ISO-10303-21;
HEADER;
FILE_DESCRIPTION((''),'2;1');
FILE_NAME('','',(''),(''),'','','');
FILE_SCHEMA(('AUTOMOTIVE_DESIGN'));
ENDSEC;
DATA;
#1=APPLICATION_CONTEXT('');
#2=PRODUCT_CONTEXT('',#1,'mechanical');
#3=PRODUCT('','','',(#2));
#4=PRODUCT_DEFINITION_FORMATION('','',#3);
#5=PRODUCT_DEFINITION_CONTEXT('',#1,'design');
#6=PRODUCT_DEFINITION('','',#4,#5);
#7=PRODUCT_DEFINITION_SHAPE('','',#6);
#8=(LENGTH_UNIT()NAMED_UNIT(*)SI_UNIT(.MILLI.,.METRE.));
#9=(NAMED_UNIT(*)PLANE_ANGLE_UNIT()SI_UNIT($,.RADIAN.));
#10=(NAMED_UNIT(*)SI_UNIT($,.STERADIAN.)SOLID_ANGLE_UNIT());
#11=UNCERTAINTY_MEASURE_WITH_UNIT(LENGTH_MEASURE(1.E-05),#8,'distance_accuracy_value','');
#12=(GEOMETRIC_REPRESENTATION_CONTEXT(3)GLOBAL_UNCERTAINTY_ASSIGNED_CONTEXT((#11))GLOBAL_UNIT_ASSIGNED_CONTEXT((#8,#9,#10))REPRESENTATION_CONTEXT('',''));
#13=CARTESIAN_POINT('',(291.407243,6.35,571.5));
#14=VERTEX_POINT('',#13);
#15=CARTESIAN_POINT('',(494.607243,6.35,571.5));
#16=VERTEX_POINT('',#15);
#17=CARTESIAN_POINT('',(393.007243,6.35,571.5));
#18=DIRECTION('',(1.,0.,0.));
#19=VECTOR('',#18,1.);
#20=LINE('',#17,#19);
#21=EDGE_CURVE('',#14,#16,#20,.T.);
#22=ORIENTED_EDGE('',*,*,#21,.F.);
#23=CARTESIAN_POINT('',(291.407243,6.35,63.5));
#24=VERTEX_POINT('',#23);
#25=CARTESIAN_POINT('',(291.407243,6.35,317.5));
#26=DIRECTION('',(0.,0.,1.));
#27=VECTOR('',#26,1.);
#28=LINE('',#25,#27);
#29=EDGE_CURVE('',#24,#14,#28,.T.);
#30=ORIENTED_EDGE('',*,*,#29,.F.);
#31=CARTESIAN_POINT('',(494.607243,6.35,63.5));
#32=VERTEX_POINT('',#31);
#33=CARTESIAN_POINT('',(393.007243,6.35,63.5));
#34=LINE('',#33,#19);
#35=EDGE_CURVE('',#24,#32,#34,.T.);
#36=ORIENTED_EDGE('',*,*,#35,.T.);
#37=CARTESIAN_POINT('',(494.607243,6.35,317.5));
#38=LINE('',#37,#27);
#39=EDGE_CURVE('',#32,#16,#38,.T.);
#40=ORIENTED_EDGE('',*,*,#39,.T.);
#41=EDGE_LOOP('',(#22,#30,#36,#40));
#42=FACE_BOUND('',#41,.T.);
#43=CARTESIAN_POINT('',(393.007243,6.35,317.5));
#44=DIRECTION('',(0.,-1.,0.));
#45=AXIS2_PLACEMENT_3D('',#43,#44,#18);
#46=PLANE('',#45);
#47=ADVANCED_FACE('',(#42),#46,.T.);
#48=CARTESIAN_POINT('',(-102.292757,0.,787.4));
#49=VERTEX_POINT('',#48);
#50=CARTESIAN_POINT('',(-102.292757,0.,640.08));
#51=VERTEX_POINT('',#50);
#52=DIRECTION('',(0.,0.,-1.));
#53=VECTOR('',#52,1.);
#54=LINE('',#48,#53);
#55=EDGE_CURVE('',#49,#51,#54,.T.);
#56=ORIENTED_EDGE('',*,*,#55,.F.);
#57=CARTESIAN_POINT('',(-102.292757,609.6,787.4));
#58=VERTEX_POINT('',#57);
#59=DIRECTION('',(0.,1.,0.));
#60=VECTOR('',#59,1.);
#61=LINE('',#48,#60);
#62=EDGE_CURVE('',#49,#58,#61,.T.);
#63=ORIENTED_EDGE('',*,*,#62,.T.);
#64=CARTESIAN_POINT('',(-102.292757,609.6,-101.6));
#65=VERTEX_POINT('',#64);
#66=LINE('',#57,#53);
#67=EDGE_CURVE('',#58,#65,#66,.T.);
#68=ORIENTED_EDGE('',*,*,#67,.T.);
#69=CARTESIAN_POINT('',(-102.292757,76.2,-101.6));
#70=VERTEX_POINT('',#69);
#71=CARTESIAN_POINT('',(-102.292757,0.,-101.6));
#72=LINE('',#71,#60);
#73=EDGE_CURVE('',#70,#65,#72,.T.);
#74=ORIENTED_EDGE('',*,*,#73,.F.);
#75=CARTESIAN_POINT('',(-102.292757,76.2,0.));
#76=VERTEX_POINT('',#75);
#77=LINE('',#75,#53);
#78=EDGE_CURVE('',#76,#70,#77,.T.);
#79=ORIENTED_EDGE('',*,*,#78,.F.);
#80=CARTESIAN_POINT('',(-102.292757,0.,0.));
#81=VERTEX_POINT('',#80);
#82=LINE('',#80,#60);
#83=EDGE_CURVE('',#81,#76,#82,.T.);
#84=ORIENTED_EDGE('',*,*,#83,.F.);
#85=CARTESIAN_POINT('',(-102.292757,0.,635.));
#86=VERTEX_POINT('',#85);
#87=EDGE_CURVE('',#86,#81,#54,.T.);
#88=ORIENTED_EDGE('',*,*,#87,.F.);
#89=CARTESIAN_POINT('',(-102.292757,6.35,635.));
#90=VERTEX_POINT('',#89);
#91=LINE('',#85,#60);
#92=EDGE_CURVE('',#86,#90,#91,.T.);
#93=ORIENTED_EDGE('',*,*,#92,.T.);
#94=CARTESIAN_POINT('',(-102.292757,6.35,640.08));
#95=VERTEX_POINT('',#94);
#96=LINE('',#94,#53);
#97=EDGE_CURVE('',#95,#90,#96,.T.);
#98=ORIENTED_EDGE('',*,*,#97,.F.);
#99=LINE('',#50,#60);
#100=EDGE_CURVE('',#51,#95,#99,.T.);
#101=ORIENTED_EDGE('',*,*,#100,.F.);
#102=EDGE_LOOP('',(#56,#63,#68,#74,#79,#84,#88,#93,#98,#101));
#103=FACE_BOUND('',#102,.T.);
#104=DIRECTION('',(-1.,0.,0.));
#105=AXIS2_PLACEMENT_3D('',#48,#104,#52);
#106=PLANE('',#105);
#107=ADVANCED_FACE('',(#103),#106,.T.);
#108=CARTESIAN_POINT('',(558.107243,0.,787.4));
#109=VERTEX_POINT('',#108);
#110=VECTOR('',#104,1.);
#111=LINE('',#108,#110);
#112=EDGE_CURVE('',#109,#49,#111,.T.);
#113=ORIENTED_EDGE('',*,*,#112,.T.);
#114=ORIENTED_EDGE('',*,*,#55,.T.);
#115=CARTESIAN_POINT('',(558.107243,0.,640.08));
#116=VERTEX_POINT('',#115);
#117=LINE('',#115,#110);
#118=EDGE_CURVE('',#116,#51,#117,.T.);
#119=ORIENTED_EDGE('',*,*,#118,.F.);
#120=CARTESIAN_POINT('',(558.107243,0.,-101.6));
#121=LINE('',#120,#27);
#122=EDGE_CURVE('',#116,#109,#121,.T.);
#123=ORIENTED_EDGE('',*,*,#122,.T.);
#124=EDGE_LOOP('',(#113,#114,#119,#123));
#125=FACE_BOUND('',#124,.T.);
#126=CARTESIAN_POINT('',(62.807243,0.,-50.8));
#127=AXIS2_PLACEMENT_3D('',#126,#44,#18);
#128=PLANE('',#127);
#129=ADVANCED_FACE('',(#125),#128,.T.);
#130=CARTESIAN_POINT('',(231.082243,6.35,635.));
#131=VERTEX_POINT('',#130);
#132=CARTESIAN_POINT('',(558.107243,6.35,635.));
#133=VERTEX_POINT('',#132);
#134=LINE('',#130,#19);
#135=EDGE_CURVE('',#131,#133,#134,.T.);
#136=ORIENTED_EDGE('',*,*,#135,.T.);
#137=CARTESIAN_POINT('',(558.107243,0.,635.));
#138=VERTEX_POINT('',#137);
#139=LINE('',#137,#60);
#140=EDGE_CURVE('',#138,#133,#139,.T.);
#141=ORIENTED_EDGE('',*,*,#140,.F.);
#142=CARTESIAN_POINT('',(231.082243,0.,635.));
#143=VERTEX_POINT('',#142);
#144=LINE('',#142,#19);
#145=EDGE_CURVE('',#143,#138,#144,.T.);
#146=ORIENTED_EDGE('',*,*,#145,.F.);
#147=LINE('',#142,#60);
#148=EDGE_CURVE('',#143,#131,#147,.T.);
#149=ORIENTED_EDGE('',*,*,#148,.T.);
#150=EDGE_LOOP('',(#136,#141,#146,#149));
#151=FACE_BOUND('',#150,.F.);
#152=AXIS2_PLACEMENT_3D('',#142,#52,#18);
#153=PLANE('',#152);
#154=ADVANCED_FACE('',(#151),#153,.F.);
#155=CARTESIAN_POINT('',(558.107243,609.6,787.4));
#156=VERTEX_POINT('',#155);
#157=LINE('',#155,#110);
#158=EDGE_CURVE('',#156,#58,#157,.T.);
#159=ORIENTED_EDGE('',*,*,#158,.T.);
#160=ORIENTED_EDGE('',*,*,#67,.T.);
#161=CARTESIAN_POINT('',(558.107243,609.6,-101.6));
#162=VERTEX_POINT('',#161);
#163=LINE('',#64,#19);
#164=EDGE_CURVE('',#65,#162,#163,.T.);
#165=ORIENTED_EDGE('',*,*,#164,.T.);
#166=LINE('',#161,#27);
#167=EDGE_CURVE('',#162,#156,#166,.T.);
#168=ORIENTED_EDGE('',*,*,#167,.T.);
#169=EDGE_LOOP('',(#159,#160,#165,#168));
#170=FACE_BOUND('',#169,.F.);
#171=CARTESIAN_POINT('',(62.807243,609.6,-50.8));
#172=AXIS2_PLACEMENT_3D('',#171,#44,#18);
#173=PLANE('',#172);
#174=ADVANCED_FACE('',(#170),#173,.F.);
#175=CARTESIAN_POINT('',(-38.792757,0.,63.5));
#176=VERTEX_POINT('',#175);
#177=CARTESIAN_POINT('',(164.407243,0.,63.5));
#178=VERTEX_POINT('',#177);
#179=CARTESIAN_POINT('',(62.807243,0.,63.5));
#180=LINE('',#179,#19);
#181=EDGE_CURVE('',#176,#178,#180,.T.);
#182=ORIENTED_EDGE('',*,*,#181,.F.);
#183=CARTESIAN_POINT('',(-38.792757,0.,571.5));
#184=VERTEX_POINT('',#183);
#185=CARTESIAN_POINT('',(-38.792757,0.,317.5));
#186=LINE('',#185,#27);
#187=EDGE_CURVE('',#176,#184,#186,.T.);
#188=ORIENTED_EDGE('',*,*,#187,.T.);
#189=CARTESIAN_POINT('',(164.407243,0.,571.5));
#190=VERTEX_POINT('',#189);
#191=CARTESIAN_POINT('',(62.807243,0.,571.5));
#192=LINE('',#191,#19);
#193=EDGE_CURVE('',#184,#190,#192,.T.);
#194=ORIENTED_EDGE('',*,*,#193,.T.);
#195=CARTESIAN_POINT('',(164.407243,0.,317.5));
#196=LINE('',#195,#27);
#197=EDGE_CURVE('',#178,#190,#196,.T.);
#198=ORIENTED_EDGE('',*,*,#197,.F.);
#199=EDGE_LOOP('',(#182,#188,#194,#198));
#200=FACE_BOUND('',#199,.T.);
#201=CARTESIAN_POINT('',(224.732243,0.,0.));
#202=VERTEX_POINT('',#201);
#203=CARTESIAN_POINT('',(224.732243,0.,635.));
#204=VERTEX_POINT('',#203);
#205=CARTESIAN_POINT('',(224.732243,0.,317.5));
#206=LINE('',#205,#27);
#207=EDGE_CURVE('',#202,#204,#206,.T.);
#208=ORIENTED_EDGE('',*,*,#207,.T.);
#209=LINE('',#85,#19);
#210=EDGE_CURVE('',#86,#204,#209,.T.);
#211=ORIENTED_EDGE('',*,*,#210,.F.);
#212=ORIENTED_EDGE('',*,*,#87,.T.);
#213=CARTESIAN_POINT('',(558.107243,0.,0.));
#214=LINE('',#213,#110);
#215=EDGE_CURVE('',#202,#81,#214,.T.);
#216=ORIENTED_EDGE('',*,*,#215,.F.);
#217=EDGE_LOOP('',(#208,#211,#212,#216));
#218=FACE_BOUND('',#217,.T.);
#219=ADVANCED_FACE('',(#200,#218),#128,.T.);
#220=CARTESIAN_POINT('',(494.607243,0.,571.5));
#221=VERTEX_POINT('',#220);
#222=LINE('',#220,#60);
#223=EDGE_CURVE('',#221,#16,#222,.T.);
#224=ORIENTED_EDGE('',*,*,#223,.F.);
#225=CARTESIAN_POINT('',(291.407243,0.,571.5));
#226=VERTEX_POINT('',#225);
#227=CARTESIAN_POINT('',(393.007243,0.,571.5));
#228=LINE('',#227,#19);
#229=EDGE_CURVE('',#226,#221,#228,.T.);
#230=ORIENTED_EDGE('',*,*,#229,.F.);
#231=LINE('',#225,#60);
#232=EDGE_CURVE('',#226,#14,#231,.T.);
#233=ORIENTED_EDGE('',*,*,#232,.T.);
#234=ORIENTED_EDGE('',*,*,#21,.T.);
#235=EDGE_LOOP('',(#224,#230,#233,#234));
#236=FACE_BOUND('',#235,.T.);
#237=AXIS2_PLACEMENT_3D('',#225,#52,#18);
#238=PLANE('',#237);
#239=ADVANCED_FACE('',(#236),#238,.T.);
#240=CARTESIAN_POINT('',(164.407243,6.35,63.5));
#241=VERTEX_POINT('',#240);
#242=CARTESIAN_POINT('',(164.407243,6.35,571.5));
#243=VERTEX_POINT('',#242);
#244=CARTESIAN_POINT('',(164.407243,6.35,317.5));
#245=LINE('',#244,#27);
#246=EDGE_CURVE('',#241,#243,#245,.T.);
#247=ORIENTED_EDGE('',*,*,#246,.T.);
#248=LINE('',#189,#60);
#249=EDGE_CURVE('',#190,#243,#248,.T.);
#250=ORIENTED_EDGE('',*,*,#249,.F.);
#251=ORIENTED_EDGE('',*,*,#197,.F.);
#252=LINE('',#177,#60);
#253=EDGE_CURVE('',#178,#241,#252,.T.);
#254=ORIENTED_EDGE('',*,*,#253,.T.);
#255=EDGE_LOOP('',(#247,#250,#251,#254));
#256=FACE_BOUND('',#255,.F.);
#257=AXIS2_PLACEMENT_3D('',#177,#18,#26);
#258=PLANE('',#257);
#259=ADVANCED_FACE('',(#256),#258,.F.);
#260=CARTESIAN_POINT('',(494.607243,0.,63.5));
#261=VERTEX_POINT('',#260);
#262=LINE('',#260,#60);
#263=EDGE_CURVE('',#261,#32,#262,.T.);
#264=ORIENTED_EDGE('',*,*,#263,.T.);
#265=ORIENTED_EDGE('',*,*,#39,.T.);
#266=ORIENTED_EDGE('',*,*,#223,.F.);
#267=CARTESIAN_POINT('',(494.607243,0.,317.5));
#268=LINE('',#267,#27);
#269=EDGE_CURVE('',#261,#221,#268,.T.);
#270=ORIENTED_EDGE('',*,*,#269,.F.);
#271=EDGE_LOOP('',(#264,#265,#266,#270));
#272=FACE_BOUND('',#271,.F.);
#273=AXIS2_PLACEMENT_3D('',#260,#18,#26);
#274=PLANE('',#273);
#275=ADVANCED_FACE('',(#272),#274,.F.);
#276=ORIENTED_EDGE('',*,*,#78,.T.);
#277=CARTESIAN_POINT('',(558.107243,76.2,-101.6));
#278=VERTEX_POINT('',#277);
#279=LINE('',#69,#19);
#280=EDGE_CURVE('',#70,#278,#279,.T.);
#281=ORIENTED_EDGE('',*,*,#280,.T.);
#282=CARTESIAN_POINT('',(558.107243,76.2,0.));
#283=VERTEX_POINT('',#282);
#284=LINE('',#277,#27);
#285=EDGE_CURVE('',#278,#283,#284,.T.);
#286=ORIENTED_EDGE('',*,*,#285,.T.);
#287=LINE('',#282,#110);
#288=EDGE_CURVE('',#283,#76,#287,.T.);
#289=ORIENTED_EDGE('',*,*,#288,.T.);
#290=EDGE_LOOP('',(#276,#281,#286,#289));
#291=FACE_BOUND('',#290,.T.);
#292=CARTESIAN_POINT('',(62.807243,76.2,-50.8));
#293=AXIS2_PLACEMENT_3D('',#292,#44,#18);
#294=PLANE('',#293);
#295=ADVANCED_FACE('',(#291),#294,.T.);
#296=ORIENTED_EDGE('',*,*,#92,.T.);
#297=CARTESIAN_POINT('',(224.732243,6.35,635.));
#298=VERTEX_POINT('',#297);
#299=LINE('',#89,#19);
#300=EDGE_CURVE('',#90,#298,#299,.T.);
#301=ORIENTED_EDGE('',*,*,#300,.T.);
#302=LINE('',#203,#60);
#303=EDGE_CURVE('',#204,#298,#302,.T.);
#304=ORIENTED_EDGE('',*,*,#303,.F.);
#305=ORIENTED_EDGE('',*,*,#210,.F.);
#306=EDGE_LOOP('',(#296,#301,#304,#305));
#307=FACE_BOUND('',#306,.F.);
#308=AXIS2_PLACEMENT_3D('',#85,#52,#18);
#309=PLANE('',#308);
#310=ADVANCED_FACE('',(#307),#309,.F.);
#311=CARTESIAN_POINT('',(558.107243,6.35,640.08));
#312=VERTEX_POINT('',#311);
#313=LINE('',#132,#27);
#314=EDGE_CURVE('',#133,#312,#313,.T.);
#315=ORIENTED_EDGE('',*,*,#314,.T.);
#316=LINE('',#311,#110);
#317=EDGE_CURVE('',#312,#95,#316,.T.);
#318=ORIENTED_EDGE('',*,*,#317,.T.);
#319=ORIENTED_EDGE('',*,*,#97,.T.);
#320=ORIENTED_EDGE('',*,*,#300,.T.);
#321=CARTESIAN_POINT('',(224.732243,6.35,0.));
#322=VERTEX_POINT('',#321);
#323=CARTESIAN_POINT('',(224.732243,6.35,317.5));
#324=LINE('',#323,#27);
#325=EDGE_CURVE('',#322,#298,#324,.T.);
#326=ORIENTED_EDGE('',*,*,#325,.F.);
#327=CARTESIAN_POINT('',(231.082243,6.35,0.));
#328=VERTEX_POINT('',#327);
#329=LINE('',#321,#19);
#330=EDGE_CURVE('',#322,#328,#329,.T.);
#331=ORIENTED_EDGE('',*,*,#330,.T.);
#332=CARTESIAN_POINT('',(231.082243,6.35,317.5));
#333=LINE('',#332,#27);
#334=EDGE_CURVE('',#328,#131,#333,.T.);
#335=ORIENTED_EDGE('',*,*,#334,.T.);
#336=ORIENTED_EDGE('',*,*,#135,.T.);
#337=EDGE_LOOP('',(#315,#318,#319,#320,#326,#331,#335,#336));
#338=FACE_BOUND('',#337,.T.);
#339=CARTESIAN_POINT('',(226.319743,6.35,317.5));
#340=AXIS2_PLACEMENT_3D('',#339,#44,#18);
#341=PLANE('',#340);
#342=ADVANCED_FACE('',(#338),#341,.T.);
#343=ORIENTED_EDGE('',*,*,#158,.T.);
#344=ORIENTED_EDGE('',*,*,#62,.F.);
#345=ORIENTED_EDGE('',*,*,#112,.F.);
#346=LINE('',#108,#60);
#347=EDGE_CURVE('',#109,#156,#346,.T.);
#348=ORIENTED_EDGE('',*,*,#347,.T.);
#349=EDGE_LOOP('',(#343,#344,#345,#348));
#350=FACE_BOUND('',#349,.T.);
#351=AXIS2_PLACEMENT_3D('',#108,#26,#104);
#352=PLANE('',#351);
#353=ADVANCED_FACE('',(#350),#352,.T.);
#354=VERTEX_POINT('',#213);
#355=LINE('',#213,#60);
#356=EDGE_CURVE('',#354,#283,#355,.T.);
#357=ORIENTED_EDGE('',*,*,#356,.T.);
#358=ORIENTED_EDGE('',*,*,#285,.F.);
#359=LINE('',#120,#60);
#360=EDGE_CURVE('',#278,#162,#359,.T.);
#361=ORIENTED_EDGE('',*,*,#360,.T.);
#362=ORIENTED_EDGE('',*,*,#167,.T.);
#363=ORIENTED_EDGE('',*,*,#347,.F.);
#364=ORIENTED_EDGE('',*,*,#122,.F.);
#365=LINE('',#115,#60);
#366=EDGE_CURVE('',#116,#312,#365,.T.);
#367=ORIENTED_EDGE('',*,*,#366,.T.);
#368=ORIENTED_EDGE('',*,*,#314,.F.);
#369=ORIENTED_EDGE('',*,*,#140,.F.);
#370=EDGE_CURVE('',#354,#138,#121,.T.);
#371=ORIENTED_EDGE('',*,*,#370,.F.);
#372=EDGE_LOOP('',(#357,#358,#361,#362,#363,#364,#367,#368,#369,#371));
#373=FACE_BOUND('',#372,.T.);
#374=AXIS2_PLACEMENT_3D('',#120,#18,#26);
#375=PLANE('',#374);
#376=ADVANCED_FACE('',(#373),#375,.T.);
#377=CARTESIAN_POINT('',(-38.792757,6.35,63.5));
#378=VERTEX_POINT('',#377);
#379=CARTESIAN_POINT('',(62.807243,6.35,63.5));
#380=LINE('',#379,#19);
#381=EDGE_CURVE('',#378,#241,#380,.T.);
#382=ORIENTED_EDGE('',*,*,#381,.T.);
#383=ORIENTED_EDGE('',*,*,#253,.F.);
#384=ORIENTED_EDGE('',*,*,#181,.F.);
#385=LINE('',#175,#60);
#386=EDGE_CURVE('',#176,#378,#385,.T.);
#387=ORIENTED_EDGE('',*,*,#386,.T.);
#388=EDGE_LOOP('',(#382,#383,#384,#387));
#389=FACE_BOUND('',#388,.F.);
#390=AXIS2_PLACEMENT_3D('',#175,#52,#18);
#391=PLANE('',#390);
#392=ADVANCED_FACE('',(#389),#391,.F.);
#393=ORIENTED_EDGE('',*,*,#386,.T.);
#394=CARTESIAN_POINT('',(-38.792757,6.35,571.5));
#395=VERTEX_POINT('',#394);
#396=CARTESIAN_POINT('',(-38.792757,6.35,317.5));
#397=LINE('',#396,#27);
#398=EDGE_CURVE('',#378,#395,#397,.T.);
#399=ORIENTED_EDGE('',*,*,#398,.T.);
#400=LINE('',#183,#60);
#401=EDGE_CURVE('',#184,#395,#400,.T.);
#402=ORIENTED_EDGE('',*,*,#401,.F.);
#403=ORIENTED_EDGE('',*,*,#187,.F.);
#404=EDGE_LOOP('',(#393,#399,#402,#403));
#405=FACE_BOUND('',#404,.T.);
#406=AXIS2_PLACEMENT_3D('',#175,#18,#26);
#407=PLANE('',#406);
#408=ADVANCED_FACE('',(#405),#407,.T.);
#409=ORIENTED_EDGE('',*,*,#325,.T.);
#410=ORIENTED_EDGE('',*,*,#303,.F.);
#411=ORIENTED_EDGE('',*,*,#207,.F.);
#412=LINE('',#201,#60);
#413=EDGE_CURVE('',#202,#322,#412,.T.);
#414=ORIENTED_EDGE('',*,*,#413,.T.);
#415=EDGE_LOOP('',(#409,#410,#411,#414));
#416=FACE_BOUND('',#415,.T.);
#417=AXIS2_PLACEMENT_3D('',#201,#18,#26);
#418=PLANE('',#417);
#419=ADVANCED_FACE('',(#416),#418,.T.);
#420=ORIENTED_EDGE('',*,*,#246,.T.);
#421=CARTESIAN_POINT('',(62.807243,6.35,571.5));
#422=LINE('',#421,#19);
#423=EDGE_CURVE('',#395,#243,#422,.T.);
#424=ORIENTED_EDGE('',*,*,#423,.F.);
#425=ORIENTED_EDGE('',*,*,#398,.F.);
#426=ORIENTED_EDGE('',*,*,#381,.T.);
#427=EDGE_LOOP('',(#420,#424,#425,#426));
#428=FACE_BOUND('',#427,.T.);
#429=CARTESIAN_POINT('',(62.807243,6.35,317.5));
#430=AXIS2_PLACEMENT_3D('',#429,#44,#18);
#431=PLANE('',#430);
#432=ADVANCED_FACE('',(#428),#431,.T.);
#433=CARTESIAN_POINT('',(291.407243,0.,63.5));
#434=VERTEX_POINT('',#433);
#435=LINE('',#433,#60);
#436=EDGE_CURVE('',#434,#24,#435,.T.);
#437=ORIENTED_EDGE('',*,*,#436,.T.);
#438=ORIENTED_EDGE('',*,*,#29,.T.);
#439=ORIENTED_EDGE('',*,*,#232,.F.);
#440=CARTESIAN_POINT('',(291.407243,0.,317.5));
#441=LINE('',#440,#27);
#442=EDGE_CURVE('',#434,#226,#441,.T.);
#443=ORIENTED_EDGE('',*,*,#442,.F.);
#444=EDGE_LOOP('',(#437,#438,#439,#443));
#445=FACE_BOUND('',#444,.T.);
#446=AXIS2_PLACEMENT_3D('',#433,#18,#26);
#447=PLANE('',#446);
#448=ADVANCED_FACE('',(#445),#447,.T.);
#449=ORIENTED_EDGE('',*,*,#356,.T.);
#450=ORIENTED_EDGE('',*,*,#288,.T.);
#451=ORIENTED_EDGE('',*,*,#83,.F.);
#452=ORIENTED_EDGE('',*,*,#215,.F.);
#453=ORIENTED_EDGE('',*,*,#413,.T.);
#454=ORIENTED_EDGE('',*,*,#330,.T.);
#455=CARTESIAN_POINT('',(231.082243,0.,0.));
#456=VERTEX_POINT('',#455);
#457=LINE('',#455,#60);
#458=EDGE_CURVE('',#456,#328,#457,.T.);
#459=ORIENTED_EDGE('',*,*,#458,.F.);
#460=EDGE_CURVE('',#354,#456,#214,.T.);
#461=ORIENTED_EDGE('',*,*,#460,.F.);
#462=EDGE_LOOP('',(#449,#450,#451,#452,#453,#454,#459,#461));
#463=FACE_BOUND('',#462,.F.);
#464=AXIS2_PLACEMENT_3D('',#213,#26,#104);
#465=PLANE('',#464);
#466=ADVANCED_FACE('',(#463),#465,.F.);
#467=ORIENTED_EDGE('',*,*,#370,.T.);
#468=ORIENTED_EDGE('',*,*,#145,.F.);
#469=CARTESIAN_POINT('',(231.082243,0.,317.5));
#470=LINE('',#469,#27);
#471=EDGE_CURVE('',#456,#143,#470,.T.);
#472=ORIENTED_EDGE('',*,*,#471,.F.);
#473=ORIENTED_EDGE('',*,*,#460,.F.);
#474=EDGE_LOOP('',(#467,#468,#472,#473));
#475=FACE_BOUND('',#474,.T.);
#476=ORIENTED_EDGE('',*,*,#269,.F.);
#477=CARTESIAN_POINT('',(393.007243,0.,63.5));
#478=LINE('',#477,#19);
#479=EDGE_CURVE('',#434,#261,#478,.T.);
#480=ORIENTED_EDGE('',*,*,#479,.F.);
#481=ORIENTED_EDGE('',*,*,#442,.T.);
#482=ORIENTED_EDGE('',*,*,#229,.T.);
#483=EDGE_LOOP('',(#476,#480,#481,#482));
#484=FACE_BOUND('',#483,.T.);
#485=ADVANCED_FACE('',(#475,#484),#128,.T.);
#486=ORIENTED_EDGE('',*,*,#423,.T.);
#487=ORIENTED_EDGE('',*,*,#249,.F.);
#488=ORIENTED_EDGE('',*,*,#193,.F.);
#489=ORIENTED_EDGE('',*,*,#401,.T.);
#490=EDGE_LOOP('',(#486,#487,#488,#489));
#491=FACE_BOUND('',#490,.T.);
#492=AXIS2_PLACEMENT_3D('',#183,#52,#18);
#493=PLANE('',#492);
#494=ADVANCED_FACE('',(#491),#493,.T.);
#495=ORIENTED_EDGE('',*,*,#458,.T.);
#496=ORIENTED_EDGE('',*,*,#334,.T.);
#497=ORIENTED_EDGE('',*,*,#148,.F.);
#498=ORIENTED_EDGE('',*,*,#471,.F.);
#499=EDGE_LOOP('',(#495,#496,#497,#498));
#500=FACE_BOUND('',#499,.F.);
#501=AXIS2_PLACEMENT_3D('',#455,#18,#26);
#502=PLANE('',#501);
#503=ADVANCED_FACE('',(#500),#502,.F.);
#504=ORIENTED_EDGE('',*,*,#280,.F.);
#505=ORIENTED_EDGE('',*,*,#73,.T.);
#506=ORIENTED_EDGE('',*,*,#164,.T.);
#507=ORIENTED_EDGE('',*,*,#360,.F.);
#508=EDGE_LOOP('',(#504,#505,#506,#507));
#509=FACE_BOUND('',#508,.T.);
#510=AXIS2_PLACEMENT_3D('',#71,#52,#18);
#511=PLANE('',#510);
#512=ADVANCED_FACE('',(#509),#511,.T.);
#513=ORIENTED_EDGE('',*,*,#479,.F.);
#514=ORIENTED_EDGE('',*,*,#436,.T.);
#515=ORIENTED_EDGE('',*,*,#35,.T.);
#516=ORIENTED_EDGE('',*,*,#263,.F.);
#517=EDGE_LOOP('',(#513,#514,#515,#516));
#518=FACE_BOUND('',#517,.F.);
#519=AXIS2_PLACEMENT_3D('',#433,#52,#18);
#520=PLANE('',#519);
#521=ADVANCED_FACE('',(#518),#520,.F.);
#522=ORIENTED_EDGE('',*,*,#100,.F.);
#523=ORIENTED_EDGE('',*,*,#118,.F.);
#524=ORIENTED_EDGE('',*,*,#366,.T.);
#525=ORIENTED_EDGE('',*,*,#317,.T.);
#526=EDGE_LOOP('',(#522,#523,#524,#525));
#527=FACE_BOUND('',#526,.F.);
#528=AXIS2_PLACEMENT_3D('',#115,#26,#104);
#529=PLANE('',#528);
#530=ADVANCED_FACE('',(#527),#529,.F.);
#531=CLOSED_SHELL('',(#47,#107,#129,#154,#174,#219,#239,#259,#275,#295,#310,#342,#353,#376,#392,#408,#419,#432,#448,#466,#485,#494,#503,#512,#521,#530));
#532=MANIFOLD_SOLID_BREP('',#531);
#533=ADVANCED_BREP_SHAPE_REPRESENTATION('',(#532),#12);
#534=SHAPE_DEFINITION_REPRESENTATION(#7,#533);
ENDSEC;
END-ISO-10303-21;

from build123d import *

# Parameters (mm, degrees)
F0_W     = 3.175
F0_H     = 635
F0_W_2   = 327.025
F0_W_3   = 203.2
F0_H_2   = 508
F0_W_4   = 330.2
F0_H_3   = 147.32
F1_DEPTH = 609.6
F2_DEPTH = 6.35
F3_DEPTH = 76.2


with BuildPart() as f1:
    # F0 (on Front) → F1 (new body)
    with BuildSketch(Plane.XZ):
        Polygon((227.9072425127, -101.6), (227.9072425127, 0), (224.7322425127, 0), (-102.2927574873, 0), (-102.2927574873, -101.6), align=None)
        with Locations((226.3197425127, 317.5)):
            Rectangle(F0_W, F0_H)
        Polygon((231.0822425127, 0), (227.9072425127, 0), (227.9072425127, -101.6), (558.1072425127, -101.6), (558.1072425127, 0), align=None)
        with Locations((229.4947425127, 317.5)):
            Rectangle(F0_W, F0_H)
        with Locations((61.2197425127, 317.5)):
            Rectangle(F0_W_2, F0_H)
        with Locations((62.8072425127, 317.5)):
            Rectangle(F0_W_3, F0_H_2, mode=Mode.SUBTRACT)
        Polygon((224.7322425127, 635), (227.9072425127, 635), (227.9072425127, 640.08), (-102.2927574873, 640.08), (-102.2927574873, 635), align=None)
        Polygon((227.9072425127, 640.08), (227.9072425127, 635), (231.0822425127, 635), (558.1072425127, 635), (558.1072425127, 640.08), align=None)
        with Locations((394.5947425127, 317.5)):
            Rectangle(F0_W_2, F0_H)
        with Locations((393.0072425127, 317.5)):
            Rectangle(F0_W_3, F0_H_2, mode=Mode.SUBTRACT)
        with Locations((62.8072425127, 713.74)):
            Rectangle(F0_W_4, F0_H_3)
        with Locations((393.0072425127, 713.74)):
            Rectangle(F0_W_4, F0_H_3)
        with Locations((62.8072425127, 317.5)):
            Rectangle(F0_W_3, F0_H_2)
        with Locations((393.0072425127, 317.5)):
            Rectangle(F0_W_3, F0_H_2)
    extrude(amount=-F1_DEPTH)

    # F0 (on Front) → F2 (cut)
    with BuildSketch(Plane.XZ):
        with Locations((226.3197425127, 317.5)):
            Rectangle(F0_W, F0_H)
        with Locations((229.4947425127, 317.5)):
            Rectangle(F0_W, F0_H)
        Polygon((224.7322425127, 635), (227.9072425127, 635), (227.9072425127, 640.08), (-102.2927574873, 640.08), (-102.2927574873, 635), align=None)
        Polygon((227.9072425127, 640.08), (227.9072425127, 635), (231.0822425127, 635), (558.1072425127, 635), (558.1072425127, 640.08), align=None)
        with Locations((62.8072425127, 317.5)):
            Rectangle(F0_W_3, F0_H_2)
        with Locations((393.0072425127, 317.5)):
            Rectangle(F0_W_3, F0_H_2)
    extrude(amount=-F2_DEPTH, mode=Mode.SUBTRACT)

    # F0 (on Front) → F3 (cut)
    with BuildSketch(Plane.XZ):
        Polygon((227.9072425127, -101.6), (227.9072425127, 0), (224.7322425127, 0), (-102.2927574873, 0), (-102.2927574873, -101.6), align=None)
        Polygon((231.0822425127, 0), (227.9072425127, 0), (227.9072425127, -101.6), (558.1072425127, -101.6), (558.1072425127, 0), align=None)
    extrude(amount=-F3_DEPTH, mode=Mode.SUBTRACT)


solid = f1.part
